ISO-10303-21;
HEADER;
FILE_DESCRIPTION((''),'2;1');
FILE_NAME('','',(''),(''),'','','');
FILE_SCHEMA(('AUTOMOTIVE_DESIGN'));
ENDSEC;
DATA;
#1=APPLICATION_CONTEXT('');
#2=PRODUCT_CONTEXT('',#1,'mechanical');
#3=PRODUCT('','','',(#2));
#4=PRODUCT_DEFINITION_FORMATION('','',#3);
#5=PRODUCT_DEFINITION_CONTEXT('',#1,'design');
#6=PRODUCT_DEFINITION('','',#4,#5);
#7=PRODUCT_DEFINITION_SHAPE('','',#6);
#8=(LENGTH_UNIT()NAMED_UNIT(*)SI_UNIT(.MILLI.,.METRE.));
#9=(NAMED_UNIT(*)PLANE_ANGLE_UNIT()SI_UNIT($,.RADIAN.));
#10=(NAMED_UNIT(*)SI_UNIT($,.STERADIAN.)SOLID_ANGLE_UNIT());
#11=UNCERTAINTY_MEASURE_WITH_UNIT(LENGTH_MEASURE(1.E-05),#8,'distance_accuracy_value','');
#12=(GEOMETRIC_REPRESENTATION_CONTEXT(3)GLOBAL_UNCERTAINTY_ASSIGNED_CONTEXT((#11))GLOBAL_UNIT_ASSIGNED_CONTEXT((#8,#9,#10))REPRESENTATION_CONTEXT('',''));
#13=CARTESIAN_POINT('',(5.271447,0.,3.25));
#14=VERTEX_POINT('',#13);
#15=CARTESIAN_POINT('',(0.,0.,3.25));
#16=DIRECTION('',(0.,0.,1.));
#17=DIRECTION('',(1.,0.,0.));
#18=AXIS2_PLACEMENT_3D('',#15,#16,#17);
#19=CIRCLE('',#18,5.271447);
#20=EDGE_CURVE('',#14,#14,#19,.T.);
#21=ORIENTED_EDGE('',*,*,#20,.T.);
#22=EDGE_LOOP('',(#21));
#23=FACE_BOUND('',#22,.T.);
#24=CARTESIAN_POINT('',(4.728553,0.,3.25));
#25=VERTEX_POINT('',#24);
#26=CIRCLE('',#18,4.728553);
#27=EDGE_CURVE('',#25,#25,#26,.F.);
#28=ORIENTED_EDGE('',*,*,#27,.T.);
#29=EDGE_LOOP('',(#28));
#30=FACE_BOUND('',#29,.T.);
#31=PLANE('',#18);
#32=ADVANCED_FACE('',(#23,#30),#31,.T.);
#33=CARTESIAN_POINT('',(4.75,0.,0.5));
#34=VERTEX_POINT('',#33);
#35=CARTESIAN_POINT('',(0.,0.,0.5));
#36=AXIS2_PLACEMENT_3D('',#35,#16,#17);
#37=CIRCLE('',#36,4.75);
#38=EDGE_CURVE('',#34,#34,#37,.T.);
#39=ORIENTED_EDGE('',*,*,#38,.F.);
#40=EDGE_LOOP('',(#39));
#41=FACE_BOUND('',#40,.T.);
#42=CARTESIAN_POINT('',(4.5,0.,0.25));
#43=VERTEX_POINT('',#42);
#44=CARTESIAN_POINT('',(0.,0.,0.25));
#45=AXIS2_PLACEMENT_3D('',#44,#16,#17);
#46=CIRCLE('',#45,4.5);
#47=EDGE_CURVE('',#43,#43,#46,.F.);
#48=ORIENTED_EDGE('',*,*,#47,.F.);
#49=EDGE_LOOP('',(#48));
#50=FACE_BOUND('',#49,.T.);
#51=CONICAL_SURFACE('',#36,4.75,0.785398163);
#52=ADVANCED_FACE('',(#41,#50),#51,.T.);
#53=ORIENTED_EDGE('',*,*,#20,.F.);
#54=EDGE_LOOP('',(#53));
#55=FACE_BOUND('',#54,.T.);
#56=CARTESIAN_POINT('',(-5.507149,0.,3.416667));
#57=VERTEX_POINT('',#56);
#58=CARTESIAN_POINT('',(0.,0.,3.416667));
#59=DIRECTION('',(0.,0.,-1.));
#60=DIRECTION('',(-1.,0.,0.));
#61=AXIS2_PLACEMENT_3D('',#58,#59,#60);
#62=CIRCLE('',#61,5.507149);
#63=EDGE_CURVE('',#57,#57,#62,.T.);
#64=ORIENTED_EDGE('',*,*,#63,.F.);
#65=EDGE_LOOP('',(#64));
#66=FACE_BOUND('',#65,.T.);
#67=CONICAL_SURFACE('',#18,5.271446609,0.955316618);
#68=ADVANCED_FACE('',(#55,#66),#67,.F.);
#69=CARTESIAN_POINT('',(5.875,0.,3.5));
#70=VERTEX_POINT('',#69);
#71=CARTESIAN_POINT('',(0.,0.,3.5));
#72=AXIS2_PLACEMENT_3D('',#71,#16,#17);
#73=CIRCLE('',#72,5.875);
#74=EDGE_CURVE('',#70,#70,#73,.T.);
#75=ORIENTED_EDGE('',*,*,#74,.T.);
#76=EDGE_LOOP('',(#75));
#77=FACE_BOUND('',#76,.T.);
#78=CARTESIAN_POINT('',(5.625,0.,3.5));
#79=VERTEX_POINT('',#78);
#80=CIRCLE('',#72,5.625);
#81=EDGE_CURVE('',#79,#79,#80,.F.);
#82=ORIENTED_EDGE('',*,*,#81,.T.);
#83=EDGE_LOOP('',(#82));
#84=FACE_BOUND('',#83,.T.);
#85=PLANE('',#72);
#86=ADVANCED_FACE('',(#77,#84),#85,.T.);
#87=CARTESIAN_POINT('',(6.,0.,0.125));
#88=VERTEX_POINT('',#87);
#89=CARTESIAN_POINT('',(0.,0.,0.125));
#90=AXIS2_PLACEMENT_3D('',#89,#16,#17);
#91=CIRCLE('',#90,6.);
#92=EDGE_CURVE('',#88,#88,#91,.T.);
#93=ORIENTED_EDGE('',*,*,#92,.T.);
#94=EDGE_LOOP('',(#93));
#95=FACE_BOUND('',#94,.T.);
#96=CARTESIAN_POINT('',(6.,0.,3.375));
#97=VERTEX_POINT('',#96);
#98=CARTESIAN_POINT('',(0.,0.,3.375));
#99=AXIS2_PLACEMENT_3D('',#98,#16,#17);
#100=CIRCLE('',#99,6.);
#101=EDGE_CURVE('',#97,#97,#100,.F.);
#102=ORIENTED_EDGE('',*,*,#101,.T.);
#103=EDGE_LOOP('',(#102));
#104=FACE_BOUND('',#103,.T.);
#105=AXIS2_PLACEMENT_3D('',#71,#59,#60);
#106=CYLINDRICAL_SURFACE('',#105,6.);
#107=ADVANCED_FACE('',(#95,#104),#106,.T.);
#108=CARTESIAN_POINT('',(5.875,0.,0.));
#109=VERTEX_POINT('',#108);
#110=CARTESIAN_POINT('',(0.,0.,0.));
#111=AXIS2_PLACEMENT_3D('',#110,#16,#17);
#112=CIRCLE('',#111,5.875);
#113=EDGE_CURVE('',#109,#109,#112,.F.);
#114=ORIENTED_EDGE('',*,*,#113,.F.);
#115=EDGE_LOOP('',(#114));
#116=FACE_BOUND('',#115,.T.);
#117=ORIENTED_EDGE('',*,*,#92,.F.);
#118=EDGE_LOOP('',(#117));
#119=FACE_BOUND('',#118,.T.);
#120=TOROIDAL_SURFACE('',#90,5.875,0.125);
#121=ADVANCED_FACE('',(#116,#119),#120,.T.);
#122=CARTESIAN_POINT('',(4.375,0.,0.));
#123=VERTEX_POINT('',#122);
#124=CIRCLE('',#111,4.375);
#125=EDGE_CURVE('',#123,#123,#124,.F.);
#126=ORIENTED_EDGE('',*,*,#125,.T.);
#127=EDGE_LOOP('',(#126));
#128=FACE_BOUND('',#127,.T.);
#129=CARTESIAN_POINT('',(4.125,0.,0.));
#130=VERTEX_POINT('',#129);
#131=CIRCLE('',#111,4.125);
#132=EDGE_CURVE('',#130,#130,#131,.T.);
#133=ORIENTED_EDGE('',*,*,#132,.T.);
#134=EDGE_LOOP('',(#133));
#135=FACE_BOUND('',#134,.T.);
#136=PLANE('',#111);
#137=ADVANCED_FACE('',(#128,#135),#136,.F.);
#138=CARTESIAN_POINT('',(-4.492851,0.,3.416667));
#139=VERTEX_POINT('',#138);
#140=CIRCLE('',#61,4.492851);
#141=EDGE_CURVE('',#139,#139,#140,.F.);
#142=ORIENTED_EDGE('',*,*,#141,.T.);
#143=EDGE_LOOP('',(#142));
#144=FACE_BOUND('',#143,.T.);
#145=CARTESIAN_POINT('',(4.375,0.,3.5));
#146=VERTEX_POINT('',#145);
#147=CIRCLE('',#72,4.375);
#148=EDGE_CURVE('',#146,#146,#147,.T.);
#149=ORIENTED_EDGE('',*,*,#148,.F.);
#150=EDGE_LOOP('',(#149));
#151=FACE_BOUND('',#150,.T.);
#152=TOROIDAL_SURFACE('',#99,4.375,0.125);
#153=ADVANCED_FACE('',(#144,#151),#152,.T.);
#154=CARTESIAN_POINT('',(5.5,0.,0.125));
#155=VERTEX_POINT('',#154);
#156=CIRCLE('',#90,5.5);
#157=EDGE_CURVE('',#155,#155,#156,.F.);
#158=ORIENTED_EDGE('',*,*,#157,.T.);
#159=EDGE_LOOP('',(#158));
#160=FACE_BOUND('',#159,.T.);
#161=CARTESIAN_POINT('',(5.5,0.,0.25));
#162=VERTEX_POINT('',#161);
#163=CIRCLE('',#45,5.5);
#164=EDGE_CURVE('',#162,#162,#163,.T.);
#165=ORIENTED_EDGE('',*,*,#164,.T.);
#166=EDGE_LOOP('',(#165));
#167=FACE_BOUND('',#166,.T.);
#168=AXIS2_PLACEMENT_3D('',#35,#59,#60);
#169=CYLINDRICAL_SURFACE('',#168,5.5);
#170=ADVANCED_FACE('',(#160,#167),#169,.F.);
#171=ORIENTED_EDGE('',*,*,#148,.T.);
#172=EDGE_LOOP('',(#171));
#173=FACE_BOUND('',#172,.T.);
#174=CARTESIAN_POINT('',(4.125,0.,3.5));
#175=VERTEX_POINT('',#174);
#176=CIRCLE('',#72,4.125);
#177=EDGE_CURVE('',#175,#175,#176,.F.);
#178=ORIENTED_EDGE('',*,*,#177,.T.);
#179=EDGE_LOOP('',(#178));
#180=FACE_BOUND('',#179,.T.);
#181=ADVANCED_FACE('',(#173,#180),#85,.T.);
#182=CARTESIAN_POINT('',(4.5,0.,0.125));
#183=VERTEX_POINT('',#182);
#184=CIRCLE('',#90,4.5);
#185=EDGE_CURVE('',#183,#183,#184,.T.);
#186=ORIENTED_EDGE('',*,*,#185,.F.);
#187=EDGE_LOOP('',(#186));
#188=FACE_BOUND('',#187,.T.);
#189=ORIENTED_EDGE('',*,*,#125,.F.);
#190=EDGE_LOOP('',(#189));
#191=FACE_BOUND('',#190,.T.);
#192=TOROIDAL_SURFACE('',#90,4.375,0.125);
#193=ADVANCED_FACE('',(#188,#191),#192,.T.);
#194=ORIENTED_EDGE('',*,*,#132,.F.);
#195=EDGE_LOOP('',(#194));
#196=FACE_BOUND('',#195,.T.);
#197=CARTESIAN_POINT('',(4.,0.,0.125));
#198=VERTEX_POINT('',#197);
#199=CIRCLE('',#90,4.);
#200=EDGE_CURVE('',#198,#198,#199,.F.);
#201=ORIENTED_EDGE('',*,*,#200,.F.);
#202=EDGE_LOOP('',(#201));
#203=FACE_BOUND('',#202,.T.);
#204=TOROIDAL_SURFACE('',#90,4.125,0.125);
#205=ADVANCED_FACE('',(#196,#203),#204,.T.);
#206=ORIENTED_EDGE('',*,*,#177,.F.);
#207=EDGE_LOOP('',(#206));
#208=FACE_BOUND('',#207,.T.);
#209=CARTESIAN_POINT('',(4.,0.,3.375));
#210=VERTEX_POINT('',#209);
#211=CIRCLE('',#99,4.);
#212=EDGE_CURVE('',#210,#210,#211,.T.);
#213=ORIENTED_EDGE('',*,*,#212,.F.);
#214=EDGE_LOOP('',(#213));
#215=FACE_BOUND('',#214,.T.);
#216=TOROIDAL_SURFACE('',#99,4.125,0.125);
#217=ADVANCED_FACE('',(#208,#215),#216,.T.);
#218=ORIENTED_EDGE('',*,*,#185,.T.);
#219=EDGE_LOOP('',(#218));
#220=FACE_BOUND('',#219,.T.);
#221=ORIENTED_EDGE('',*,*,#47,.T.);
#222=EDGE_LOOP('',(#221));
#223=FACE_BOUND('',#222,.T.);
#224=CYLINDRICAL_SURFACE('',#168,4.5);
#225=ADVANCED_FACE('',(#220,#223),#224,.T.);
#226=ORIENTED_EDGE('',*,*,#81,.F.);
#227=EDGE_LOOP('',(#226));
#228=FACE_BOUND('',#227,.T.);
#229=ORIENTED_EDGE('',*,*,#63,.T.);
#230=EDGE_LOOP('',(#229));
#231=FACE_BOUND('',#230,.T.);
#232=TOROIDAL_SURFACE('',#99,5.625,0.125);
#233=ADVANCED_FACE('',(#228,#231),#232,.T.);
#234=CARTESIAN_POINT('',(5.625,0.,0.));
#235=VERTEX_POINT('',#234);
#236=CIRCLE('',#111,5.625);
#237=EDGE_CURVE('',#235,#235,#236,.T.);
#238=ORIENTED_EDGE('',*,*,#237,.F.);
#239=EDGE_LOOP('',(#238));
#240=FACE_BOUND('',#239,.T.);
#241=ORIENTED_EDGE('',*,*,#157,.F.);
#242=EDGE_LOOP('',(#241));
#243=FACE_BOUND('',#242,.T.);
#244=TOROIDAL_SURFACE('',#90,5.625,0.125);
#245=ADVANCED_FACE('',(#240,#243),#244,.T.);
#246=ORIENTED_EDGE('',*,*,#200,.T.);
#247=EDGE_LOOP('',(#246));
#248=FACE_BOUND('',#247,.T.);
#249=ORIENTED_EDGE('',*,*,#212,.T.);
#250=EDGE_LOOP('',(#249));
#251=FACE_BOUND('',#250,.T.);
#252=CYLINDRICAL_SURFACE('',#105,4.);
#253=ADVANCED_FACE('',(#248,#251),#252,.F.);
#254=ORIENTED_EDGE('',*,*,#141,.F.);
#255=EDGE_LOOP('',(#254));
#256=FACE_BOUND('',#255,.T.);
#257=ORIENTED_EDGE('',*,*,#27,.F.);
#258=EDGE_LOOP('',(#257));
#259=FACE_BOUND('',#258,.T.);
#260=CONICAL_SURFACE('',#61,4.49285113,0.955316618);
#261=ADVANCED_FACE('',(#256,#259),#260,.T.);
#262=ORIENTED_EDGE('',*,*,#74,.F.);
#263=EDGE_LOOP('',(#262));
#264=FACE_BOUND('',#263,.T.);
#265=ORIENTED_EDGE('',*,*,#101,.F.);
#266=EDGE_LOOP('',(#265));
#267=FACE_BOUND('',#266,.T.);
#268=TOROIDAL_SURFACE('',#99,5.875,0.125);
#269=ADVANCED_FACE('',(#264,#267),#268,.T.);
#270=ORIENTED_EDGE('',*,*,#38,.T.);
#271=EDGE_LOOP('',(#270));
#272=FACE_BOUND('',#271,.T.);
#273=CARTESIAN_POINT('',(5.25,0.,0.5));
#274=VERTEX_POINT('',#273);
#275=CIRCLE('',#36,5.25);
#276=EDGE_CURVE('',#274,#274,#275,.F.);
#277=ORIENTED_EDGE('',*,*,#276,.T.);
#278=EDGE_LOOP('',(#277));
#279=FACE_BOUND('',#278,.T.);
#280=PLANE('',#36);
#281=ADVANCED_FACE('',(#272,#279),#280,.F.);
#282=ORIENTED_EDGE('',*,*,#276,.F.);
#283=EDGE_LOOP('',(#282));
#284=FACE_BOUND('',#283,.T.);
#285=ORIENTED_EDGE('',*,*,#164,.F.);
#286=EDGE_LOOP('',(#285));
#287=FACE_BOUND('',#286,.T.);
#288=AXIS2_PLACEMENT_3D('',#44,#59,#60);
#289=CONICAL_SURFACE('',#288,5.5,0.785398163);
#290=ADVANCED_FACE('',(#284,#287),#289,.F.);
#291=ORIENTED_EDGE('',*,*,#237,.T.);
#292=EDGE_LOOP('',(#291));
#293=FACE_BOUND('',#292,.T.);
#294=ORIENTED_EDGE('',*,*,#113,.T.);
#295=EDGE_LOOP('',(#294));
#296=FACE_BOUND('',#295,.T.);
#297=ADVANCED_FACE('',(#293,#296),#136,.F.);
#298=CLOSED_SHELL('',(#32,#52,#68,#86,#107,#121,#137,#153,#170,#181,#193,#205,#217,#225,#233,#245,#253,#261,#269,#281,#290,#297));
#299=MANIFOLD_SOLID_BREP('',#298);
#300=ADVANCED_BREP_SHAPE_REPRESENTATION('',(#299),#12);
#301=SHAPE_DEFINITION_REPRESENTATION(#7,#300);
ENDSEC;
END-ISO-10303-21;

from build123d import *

# Parameters (mm, degrees)
SKETCH1_R           = 6
SKETCH1_R_2         = 4
BOSS_EXTRUDE1_DEPTH = 3.5
SKETCH2_R           = 5.5
SKETCH2_R_2         = 4.5
CUT_EXTRUDE1_DEPTH  = 0.25
CUT_EXTRUDE2_START  = -3
SKETCH2_2_R         = 5.5
SKETCH2_2_R_2       = 4.5
CUT_EXTRUDE2_DEPTH  = 0.5
FILLET1_R           = 0.125


with BuildPart() as part:
    # Sketch1 → Boss-Extrude1 (new body)
    with BuildSketch(Plane.XY):
        Circle(SKETCH1_R)
        Circle(SKETCH1_R_2, mode=Mode.SUBTRACT)
    extrude(amount=BOSS_EXTRUDE1_DEPTH)

    # Sketch2 → Cut-Extrude1 (cut)
    with BuildSketch(Plane.XY.offset(3.5)):
        Circle(SKETCH2_R)
        Circle(SKETCH2_R_2, mode=Mode.SUBTRACT)
    extrude(amount=-CUT_EXTRUDE1_DEPTH, mode=Mode.SUBTRACT)

    # Sketch2<2> → Cut-Extrude2 (cut)
    with BuildSketch(Plane.XY.offset(3.5).offset(CUT_EXTRUDE2_START)):
        Circle(SKETCH2_2_R)
        Circle(SKETCH2_2_R_2, mode=Mode.SUBTRACT)
    extrude(amount=-CUT_EXTRUDE2_DEPTH, mode=Mode.SUBTRACT)

    # Fillet1
    fillet1_edges = [part.edges().sort_by_distance(p)[0] for p in [
        (-5.5, 0, 3.5),
        (-4.5, 0, 3.5),
        (-4.5, 0, 0),
        (-5.5, 0, 0),
        (-6, 0, 0),
        (-6, 0, 3.5),
        (-4, 0, 0),
        (-4, 0, 3.5),
    ]]
    fillet(fillet1_edges, radius=FILLET1_R)

    # Chamfer1: read off the stored shape, not the designer's step
    # Chamfer1 outline → Chamfer1 (revolve)
    with BuildSketch(Plane.XZ):
        Polygon((5.271446609, 3.25), (5.5, 3.25), (5.5, 3.375), (5.50714887, 3.375), (5.50714887, 3.416666667), align=None)
        Polygon((5.5, 0.5), (5.25, 0.5), (5.5, 0.25), align=None)
        Polygon((4.5, 3.25), (4.728553391, 3.25), (4.49285113, 3.416666667), (4.49285113, 3.375), (4.5, 3.375), align=None)
        Polygon((4.75, 0.5), (4.5, 0.5), (4.5, 0.25), align=None)
    revolve(axis=Axis((0, 0, 0), (0, 0, 1)))


solid = part.part
